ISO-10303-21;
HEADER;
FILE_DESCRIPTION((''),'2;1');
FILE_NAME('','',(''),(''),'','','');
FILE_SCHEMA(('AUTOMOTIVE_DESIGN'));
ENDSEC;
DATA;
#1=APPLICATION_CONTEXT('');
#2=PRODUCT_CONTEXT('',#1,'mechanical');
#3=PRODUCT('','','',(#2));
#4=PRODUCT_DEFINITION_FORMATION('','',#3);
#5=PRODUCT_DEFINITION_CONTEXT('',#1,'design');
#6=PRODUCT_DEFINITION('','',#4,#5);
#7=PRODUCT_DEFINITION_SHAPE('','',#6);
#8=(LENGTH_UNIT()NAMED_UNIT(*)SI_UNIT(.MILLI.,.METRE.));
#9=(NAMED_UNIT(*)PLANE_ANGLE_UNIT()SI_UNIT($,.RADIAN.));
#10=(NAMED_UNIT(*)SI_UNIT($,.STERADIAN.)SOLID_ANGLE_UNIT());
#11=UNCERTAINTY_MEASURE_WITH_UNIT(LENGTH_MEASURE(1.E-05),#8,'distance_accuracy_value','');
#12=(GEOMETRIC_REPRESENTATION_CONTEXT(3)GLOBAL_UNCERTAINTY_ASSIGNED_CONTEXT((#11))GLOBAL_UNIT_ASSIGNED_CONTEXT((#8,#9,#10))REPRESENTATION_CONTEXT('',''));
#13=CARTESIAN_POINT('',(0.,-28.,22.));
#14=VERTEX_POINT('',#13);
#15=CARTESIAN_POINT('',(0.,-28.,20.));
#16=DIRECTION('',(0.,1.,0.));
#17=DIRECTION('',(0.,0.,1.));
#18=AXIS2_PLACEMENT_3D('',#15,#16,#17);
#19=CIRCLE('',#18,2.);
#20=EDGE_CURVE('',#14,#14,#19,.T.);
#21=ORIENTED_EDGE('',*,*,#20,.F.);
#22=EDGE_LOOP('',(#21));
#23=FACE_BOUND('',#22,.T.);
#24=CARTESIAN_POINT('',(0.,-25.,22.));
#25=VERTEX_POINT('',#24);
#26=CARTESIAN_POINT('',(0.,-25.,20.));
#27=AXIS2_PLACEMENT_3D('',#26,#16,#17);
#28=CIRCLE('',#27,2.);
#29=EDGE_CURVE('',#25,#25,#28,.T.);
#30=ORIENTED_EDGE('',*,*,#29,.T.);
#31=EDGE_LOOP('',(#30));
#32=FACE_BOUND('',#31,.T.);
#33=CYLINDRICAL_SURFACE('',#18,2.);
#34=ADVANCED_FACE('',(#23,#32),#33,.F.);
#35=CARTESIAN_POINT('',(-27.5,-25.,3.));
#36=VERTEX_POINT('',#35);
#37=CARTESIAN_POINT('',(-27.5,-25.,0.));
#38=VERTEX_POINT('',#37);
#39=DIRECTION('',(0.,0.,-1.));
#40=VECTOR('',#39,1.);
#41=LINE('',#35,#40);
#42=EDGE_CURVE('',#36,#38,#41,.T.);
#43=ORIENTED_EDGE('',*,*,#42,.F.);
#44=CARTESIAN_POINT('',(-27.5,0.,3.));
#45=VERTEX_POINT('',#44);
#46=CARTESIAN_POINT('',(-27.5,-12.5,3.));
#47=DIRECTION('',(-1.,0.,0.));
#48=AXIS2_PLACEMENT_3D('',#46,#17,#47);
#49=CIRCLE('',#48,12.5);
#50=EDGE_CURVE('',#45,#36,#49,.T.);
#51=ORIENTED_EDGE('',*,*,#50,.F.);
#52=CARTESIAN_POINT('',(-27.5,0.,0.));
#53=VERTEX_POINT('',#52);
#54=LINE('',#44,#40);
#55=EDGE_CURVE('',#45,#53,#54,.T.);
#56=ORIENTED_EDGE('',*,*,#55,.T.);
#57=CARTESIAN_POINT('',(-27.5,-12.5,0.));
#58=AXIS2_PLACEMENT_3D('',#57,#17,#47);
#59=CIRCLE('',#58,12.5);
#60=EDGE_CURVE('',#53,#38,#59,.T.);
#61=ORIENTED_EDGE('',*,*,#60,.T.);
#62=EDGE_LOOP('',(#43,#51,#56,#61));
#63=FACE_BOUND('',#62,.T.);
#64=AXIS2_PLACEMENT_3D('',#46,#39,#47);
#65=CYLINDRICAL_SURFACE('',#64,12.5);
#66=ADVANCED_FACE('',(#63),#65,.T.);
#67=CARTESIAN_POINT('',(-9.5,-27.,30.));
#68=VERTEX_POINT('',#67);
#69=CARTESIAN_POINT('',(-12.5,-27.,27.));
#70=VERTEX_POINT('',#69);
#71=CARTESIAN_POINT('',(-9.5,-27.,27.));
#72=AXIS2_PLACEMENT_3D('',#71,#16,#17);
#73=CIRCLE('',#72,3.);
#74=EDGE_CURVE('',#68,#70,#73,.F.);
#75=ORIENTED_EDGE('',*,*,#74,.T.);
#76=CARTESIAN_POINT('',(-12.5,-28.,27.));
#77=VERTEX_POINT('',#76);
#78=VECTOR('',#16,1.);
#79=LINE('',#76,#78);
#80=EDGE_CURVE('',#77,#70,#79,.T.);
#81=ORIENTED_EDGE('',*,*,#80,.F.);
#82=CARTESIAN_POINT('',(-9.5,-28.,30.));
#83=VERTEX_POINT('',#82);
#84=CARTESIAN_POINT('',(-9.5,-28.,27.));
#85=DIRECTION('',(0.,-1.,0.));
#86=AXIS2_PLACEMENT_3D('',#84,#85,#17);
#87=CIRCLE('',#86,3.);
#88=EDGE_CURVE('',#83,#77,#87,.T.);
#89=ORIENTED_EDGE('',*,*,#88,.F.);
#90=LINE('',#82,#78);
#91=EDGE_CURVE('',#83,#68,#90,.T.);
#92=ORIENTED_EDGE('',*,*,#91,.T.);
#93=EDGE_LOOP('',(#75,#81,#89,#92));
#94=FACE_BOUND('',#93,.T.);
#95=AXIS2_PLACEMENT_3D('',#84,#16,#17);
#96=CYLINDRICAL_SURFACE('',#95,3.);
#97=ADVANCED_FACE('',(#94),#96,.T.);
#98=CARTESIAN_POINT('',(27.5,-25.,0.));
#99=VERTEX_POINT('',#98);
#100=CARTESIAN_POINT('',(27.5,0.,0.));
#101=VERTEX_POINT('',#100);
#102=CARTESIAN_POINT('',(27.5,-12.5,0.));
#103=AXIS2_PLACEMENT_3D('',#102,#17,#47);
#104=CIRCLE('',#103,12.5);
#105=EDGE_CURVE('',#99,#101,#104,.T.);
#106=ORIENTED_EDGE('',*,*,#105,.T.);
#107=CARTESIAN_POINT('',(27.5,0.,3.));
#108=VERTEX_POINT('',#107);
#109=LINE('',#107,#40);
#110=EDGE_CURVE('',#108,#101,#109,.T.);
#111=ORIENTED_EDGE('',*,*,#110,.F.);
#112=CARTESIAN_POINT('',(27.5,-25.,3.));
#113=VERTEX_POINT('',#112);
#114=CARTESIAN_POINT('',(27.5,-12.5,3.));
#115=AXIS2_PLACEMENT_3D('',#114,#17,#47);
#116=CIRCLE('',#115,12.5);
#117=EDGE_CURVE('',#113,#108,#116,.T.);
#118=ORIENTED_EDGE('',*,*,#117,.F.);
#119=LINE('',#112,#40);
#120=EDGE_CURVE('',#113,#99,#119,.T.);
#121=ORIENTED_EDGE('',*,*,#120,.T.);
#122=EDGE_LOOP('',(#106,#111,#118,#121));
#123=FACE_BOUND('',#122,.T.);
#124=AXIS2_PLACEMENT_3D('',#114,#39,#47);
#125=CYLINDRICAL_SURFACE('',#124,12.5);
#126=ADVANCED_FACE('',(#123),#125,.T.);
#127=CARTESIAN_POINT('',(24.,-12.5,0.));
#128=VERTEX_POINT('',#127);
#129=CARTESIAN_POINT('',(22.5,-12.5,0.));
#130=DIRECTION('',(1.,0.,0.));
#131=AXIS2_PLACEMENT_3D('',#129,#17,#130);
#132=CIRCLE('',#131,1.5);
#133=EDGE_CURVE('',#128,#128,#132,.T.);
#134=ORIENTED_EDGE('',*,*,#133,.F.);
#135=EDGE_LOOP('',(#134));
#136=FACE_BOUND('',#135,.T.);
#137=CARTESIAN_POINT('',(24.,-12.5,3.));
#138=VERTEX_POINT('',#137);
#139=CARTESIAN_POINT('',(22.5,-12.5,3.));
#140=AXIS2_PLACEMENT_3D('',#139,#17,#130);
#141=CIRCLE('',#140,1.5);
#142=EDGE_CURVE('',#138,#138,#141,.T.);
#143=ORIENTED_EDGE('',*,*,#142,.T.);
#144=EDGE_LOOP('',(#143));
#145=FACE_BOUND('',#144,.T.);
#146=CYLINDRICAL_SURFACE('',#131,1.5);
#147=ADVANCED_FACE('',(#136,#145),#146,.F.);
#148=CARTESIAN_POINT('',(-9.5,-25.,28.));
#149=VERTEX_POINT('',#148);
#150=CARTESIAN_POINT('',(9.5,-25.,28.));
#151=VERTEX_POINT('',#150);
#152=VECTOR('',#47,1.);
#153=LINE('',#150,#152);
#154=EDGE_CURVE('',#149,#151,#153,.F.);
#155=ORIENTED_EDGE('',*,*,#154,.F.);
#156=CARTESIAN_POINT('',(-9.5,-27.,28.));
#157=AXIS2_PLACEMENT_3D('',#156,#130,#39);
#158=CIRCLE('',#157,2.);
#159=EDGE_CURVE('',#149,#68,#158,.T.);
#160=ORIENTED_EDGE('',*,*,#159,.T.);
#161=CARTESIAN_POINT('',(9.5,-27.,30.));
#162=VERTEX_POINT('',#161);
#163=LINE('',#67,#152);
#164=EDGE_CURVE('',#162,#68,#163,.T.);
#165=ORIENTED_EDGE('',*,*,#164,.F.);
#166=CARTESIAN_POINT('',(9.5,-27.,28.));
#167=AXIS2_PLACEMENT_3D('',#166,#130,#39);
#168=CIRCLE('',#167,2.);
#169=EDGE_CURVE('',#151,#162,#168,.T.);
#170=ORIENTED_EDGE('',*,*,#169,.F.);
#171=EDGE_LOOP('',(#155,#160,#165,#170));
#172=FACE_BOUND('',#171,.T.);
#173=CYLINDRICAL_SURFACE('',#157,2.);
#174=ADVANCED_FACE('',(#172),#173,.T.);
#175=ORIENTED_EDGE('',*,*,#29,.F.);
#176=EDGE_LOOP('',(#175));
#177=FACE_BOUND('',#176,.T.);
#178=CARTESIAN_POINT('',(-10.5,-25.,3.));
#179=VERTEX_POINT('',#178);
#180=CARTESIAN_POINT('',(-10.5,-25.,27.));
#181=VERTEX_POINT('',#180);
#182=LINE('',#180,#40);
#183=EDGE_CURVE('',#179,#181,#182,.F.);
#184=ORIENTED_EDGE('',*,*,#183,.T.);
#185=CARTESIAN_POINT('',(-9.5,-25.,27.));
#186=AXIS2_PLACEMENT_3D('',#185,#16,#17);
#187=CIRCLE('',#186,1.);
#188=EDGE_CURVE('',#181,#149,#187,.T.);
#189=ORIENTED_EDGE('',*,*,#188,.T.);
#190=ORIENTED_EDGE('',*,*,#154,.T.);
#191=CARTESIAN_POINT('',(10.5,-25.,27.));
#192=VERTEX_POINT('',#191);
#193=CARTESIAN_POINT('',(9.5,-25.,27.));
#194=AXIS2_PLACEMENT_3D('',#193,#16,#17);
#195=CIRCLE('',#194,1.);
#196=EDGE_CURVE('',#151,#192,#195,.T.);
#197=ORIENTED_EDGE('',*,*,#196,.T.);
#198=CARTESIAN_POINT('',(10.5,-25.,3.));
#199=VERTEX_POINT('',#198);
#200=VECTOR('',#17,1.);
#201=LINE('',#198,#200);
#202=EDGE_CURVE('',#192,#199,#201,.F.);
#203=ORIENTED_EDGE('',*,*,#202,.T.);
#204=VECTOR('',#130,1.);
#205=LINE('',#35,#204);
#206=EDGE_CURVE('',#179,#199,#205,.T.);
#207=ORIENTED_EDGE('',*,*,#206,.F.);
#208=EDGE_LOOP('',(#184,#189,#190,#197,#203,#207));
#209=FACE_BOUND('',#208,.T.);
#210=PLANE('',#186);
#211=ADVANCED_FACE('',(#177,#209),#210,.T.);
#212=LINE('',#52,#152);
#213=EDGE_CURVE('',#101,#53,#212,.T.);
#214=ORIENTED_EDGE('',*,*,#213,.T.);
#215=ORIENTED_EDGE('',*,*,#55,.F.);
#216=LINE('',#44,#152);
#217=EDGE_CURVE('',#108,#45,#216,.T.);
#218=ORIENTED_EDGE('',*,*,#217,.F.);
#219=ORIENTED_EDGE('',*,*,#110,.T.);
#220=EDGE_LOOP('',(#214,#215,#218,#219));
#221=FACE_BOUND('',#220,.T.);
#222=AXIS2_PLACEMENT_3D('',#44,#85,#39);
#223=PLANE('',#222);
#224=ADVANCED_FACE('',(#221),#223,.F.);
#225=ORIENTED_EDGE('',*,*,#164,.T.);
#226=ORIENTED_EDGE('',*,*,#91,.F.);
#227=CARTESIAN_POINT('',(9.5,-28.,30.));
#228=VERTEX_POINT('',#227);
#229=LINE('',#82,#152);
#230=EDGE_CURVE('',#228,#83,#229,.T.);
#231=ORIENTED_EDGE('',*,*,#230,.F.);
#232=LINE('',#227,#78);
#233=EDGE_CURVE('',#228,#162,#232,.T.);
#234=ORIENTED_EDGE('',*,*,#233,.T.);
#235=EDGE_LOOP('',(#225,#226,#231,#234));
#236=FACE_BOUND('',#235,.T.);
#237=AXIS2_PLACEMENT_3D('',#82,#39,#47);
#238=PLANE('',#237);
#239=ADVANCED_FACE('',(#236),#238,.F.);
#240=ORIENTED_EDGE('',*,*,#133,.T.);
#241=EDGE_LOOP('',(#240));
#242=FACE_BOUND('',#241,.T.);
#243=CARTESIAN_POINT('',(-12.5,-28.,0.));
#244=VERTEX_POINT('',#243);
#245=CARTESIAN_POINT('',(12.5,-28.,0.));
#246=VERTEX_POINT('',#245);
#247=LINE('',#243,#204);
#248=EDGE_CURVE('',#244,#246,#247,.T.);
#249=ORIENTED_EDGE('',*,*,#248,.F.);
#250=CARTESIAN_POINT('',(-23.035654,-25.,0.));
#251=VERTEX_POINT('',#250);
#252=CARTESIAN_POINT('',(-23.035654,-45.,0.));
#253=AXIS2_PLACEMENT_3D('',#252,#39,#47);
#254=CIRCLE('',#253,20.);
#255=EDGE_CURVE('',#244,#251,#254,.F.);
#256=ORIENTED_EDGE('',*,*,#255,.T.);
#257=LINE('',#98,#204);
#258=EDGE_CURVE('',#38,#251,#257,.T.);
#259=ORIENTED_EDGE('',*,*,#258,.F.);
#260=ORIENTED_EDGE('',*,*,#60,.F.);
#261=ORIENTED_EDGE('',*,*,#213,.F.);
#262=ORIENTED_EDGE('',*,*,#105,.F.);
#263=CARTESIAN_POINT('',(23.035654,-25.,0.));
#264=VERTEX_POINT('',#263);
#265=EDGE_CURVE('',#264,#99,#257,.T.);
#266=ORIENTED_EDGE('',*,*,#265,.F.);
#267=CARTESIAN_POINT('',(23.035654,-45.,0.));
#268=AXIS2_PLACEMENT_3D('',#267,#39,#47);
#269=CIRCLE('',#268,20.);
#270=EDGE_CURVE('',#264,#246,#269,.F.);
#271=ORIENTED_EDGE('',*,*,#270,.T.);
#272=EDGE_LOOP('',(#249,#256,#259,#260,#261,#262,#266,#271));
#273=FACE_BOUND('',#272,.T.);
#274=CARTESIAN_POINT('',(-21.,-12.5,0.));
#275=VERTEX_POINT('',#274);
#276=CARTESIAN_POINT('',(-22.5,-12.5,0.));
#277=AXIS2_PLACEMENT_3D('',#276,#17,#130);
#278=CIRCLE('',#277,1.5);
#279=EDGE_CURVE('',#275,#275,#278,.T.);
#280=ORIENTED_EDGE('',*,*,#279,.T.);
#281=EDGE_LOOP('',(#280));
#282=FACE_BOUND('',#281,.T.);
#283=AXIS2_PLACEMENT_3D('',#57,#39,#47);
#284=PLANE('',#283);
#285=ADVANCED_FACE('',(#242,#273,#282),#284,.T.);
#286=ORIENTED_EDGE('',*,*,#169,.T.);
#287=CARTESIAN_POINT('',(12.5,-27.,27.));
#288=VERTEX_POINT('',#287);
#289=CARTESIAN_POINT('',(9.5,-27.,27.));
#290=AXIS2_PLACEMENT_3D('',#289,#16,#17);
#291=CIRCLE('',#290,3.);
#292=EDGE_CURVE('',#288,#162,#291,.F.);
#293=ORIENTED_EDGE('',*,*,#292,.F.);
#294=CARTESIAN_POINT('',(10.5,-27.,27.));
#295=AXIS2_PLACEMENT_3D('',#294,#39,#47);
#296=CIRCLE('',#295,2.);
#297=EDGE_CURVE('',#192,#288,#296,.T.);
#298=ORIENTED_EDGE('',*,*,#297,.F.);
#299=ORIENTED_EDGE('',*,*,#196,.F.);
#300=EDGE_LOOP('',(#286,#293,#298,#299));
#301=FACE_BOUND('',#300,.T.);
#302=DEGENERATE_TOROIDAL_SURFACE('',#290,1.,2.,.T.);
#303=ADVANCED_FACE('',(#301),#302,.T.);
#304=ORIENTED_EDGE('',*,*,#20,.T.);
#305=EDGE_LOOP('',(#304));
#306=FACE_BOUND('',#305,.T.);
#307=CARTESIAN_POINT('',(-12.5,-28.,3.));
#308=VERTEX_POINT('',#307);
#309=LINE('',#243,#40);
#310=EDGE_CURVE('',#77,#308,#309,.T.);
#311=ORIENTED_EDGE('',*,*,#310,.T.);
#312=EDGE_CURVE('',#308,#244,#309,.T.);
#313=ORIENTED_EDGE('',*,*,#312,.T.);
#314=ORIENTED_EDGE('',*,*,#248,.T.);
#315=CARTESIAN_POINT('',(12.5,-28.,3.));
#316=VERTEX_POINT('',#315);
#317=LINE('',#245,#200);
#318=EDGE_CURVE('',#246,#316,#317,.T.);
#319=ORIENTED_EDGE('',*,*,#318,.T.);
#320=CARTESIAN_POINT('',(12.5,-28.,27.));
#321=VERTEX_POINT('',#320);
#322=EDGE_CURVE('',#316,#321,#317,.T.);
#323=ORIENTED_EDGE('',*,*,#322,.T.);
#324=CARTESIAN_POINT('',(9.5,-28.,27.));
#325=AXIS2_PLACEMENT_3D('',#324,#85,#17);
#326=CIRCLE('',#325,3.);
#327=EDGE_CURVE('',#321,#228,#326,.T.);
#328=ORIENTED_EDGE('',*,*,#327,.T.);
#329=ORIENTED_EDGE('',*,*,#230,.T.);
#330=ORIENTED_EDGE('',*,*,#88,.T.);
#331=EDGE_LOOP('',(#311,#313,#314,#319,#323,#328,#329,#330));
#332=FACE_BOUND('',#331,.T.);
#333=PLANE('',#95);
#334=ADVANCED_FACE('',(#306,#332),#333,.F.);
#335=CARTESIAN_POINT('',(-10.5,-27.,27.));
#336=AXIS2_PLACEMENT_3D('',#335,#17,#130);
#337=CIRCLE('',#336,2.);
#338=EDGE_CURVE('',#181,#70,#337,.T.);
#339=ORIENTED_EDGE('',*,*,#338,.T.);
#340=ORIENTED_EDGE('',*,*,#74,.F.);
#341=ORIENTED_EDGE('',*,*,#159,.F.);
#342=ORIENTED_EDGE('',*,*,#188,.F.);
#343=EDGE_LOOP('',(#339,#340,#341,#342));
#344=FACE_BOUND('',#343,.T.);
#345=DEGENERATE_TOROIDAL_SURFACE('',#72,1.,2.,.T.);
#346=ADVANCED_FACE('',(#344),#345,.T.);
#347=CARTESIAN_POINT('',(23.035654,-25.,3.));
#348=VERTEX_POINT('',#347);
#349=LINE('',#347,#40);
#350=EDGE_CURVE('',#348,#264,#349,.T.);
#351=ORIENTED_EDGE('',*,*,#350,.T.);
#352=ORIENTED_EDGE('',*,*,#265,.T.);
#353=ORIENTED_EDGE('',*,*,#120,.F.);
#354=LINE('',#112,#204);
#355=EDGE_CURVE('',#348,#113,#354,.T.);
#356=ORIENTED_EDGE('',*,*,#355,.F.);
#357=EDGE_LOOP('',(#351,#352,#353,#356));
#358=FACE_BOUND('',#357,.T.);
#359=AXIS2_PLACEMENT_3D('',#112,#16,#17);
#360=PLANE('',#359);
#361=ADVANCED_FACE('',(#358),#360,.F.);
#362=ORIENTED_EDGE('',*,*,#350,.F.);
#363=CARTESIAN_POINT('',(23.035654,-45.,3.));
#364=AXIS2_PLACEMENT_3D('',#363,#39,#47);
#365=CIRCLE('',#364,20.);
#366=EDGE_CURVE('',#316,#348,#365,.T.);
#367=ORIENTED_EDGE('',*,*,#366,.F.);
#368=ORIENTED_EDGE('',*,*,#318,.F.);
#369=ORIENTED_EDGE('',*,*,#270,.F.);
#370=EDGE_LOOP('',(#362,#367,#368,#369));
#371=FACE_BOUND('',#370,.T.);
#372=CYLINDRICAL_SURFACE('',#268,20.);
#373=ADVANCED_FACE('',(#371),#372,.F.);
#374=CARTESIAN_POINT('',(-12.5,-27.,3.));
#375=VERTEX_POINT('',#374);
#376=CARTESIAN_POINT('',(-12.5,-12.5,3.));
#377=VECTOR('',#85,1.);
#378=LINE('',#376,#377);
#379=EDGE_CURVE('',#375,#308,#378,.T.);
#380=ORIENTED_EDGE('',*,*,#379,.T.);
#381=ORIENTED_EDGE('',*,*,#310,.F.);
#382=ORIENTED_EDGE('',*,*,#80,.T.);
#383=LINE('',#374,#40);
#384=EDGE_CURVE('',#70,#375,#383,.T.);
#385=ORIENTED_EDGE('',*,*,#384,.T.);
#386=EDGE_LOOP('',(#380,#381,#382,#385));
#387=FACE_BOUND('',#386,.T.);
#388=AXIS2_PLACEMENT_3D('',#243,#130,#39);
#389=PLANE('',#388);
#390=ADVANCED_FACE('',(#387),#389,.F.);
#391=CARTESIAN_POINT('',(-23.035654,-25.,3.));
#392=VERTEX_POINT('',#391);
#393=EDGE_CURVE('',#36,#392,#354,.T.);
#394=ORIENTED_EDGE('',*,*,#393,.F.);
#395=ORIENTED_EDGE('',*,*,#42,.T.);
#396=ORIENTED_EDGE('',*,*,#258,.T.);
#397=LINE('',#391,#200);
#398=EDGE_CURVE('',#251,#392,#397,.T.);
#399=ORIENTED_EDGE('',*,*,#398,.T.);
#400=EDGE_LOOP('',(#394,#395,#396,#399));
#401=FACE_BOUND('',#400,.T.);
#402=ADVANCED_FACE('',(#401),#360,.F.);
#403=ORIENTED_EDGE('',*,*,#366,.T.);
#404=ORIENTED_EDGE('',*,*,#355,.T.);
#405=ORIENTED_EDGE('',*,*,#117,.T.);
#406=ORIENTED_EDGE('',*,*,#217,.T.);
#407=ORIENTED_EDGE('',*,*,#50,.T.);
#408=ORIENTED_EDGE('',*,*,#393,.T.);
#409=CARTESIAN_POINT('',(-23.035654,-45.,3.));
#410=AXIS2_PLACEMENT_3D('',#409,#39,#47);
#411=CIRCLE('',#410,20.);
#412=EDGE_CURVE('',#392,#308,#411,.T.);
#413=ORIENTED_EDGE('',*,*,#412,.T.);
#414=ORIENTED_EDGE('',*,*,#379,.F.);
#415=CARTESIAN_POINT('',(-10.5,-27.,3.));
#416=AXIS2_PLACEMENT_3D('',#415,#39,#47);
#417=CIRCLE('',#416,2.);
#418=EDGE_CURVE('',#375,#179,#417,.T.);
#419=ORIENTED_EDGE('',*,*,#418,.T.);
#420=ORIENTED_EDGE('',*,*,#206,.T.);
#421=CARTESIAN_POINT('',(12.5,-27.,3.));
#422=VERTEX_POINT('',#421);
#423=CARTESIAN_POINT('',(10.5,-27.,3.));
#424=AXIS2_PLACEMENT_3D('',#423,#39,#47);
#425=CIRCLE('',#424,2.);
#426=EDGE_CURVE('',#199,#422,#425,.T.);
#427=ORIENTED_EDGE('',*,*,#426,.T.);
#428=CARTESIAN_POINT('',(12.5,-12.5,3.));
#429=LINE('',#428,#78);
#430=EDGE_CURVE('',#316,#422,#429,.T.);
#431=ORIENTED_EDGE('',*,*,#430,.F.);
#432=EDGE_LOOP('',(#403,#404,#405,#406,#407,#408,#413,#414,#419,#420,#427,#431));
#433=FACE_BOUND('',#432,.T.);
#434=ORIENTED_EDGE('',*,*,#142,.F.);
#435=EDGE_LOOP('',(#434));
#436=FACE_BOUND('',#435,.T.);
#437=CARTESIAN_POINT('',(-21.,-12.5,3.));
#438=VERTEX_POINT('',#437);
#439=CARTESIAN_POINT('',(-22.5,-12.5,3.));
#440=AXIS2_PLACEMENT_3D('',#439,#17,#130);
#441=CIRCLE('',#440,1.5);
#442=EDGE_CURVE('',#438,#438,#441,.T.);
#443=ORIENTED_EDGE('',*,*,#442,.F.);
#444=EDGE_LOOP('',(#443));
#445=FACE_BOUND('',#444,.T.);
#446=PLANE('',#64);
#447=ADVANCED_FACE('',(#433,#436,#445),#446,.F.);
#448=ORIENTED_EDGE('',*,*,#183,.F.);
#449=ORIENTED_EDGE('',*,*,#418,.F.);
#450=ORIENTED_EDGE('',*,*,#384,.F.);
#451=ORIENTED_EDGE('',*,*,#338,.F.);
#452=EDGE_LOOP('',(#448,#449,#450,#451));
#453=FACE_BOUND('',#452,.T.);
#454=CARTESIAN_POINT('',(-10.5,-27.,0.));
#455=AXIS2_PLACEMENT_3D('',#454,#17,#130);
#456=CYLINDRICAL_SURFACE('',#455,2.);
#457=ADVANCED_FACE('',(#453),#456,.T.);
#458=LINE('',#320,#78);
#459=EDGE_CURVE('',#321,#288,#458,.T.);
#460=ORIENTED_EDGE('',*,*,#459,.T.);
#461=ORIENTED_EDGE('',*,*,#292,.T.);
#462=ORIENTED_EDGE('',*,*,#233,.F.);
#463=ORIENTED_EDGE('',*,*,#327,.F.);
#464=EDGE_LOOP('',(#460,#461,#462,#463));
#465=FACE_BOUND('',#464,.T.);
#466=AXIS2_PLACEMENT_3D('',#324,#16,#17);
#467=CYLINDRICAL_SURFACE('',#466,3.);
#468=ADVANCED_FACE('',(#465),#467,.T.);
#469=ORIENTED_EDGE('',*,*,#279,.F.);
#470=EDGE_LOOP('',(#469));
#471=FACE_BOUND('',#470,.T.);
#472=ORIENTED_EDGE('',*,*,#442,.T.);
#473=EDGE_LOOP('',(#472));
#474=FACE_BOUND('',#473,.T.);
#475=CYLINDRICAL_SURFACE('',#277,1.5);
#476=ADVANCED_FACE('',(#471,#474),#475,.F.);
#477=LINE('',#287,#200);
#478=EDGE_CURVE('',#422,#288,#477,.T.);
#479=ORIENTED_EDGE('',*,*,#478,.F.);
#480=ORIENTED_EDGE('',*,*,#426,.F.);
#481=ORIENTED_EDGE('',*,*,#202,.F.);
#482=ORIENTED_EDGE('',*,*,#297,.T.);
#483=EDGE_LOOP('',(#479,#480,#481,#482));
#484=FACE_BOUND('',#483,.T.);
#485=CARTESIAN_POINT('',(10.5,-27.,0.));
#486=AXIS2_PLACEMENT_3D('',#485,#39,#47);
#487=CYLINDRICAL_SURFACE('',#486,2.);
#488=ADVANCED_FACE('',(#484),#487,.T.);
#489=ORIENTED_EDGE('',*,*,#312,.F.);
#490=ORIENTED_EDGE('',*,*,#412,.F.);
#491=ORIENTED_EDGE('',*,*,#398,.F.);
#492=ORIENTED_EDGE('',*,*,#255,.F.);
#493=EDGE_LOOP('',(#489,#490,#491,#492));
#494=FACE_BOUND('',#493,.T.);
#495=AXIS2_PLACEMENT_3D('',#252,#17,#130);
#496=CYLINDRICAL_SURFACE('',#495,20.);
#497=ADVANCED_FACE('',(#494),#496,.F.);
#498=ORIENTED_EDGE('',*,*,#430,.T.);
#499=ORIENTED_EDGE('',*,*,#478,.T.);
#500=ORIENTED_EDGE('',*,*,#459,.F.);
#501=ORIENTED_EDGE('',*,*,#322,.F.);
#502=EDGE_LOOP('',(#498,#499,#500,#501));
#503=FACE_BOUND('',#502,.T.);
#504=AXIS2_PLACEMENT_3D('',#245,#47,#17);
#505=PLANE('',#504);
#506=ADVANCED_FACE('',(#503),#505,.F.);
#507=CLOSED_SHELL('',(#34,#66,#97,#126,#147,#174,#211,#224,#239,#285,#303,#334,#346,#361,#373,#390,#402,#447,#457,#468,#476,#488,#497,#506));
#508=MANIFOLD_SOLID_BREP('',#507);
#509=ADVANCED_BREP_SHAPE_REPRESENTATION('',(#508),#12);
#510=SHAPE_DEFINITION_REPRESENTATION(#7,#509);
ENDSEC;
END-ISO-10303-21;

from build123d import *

# Parameters (mm, degrees)
BOSS_EXTRU_1_DEPTH      = 3
ESQUISSE2_R             = 1.5
ENL_V_MAT_EXTRU_1_DEPTH = 48.265209192
BOSS_EXTRU_2_DEPTH      = 3
CONG_1_R                = 20
ESQUISSE4_R             = 2
ENL_V_MAT_EXTRU_2_DEPTH = 56.901699437
CONG_3_R                = 2


with BuildPart() as part:
    # Esquisse1 → Boss.-Extru.1 (new body)
    with BuildSketch(Plane.XY):
        with BuildLine():
            Line((-27.5, 0), (27.5, 0))
            ThreePointArc((27.5, 0), (40, -12.5), (27.5, -25))
            Line((27.5, -25), (-27.5, -25))
            ThreePointArc((-27.5, -25), (-40, -12.5), (-27.5, 0))
        make_face()
    extrude(amount=BOSS_EXTRU_1_DEPTH)

    # Esquisse2 → Enlèv. mat.-Extru.1 (cut, through all)
    with BuildSketch(Plane.XY.offset(3)):
        with Locations((-22.5, -12.5)):
            Circle(ESQUISSE2_R)
        with Locations((22.5, -12.5)):
            Circle(ESQUISSE2_R)
    extrude(amount=-ENL_V_MAT_EXTRU_1_DEPTH, mode=Mode.SUBTRACT)

    # Esquisse3 → Boss.-Extru.2 (add)
    with BuildSketch(Plane.XZ.offset(25)):
        with BuildLine():
            Line((-12.5, 0), (12.5, 0))
            Line((12.5, 0), (12.5, 27))
            ThreePointArc((12.5, 27), (11.621320344, 29.121320344), (9.5, 30))
            Line((9.5, 30), (-9.5, 30))
            ThreePointArc((-9.5, 30), (-11.621320344, 29.121320344), (-12.5, 27))
            Line((-12.5, 27), (-12.5, 0))
        make_face()
    extrude(amount=BOSS_EXTRU_2_DEPTH)

    # Congé1
    # the kernel refuses this fillet: 20 mm, written as the material it adds along each edge
    with BuildSketch(Plane(origin=(12.5, -25, 0), x_dir=(1, 0, 0), z_dir=(0, 0, 1)), Plane(origin=(-12.5, -25, 3), x_dir=(-1, 0, 0), z_dir=(0, 0, -1))) as cong_1_piece_1:
        with BuildLine():
            CenterArc((10.535653753, -20), CONG_1_R, 90, 31.788330617)
            Line((0, -3), (0, 0))
            Line((0, 0), (10.535653753, 0))
        make_face()
    extrude(amount=3)

    # Esquisse4 → Enlèv. mat.-Extru.2 (cut, through all)
    with BuildSketch(Plane(origin=(0, -25, 0), x_dir=(1, 0, 0), z_dir=(0, 1, 0))):
        with Locations(Location((0, -20, 0), (0, 0, 270))):
            Circle(ESQUISSE4_R)
    extrude(amount=-ENL_V_MAT_EXTRU_2_DEPTH, mode=Mode.SUBTRACT)

    # Congé3
    cong_3_edges = [part.edges().sort_by_distance(p)[0] for p in [
        (-12.5, -25, 15),
        (12.5, -25, 15),
        (11.621320344, -25, 29.121320344),
        (0, -25, 30),
        (-11.621320344, -25, 29.121320344),
    ]]
    fillet(cong_3_edges, radius=CONG_3_R)


solid = part.part
